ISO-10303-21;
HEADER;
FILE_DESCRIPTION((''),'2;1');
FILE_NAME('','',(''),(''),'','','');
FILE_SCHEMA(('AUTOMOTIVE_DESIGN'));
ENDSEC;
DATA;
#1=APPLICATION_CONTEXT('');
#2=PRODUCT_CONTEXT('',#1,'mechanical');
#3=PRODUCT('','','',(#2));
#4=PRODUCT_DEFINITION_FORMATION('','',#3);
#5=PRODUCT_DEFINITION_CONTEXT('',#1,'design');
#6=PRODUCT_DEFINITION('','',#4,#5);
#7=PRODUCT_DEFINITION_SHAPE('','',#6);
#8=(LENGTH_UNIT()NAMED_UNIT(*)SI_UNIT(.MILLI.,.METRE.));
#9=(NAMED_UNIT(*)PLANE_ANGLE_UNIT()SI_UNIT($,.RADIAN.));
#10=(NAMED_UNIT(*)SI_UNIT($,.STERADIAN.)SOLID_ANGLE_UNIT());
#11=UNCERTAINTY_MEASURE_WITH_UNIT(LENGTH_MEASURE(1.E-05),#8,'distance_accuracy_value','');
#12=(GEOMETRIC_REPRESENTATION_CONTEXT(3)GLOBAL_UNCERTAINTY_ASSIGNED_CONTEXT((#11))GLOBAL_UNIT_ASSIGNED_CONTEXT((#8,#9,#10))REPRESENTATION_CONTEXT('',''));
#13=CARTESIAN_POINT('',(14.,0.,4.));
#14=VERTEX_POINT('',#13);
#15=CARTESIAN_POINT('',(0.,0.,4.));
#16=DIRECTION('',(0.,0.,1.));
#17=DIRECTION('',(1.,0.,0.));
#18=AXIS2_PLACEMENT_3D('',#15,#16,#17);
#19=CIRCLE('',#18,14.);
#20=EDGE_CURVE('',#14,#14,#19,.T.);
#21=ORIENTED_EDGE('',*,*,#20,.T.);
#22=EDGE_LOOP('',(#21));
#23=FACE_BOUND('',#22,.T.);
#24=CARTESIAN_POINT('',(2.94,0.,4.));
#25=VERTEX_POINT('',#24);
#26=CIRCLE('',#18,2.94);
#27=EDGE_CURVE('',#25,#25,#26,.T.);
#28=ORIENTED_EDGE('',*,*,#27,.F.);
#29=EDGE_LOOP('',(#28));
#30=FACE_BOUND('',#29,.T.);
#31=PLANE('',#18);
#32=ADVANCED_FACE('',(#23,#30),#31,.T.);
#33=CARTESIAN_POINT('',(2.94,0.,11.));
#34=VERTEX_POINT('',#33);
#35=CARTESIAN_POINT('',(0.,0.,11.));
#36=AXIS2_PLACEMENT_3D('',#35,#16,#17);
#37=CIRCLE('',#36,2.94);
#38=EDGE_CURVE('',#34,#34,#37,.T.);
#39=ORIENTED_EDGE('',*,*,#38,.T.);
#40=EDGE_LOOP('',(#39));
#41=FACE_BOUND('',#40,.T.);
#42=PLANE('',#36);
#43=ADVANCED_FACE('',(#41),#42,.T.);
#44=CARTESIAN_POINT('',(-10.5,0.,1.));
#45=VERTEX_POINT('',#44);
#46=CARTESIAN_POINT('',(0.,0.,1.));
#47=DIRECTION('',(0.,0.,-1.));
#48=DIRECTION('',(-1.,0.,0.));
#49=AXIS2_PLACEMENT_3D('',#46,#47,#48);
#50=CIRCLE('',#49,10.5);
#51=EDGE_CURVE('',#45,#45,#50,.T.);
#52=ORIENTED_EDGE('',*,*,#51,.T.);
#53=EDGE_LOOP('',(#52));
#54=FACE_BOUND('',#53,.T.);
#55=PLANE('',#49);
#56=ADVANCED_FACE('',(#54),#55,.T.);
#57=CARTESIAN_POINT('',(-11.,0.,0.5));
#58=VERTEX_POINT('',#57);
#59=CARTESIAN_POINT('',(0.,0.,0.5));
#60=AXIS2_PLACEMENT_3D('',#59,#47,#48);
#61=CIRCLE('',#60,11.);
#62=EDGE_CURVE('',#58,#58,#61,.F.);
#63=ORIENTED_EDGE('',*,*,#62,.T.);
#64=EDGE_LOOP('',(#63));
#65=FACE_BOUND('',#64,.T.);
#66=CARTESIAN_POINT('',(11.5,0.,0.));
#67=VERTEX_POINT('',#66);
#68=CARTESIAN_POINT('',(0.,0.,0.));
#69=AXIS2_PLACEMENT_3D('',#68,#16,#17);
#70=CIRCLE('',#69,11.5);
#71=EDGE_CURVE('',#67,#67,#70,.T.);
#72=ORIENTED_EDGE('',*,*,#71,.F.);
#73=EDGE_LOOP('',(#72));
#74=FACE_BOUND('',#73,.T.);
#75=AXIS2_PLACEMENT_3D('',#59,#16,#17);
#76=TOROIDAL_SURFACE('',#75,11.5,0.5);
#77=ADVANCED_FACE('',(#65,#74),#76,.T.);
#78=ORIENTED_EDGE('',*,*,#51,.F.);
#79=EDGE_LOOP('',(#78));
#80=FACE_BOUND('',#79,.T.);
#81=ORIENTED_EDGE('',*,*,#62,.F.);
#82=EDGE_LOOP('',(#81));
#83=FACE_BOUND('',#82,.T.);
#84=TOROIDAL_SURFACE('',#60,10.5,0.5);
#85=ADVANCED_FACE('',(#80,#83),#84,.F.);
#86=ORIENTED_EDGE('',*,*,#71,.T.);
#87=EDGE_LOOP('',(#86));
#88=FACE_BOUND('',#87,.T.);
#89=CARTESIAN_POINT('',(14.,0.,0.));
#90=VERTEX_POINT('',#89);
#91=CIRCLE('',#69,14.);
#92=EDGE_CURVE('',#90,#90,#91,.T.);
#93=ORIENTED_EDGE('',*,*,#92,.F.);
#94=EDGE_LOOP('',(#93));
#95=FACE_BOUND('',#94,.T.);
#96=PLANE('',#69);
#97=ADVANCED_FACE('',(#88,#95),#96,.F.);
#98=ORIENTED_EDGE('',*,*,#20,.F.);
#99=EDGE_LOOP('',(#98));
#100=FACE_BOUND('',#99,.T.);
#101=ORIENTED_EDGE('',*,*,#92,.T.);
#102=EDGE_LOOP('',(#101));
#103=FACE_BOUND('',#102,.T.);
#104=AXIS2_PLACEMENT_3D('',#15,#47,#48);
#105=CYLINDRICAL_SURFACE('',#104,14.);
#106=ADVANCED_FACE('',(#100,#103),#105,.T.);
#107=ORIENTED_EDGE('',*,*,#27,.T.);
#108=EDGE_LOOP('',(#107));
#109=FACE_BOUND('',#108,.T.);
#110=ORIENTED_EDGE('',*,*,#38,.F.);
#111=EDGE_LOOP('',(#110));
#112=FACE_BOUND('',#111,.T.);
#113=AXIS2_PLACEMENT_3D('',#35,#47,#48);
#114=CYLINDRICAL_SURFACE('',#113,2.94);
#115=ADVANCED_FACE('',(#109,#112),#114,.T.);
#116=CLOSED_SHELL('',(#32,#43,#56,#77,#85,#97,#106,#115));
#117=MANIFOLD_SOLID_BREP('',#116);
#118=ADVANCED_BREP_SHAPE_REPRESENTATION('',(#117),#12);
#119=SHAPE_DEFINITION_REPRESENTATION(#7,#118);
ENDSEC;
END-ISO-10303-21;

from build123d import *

# Parameters (mm, degrees)
SKETCH1_R           = 14
BOSS_EXTRUDE1_DEPTH = 4
SKETCH2_R           = 2.94
BOSS_EXTRUDE2_DEPTH = 7
SKETCH4_R           = 11
CUT_EXTRUDE1_DEPTH  = 1
FILLET1_R           = 0.5


with BuildPart() as part:
    # Sketch1 → Boss-Extrude1 (new body)
    with BuildSketch(Plane.XY):
        Circle(SKETCH1_R)
    extrude(amount=BOSS_EXTRUDE1_DEPTH)

    # Sketch2 → Boss-Extrude2 (add)
    with BuildSketch(Plane.XY.offset(4)):
        Circle(SKETCH2_R)
    extrude(amount=BOSS_EXTRUDE2_DEPTH)

    # Sketch4 → Cut-Extrude1 (cut)
    with BuildSketch(Plane(origin=(0, 0, 0), x_dir=(-1, 0, 0), z_dir=(0, 0, -1))):
        Circle(SKETCH4_R)
    extrude(amount=-CUT_EXTRUDE1_DEPTH, mode=Mode.SUBTRACT)

    # Fillet1
    fillet1_edges = [part.edges().sort_by_distance(p)[0] for p in [
        (11, 0, 1),
        (11, 0, 0),
    ]]
    fillet(fillet1_edges, radius=FILLET1_R - 0.0001)  # a hair under: the kernel refuses the full size


solid = part.part
